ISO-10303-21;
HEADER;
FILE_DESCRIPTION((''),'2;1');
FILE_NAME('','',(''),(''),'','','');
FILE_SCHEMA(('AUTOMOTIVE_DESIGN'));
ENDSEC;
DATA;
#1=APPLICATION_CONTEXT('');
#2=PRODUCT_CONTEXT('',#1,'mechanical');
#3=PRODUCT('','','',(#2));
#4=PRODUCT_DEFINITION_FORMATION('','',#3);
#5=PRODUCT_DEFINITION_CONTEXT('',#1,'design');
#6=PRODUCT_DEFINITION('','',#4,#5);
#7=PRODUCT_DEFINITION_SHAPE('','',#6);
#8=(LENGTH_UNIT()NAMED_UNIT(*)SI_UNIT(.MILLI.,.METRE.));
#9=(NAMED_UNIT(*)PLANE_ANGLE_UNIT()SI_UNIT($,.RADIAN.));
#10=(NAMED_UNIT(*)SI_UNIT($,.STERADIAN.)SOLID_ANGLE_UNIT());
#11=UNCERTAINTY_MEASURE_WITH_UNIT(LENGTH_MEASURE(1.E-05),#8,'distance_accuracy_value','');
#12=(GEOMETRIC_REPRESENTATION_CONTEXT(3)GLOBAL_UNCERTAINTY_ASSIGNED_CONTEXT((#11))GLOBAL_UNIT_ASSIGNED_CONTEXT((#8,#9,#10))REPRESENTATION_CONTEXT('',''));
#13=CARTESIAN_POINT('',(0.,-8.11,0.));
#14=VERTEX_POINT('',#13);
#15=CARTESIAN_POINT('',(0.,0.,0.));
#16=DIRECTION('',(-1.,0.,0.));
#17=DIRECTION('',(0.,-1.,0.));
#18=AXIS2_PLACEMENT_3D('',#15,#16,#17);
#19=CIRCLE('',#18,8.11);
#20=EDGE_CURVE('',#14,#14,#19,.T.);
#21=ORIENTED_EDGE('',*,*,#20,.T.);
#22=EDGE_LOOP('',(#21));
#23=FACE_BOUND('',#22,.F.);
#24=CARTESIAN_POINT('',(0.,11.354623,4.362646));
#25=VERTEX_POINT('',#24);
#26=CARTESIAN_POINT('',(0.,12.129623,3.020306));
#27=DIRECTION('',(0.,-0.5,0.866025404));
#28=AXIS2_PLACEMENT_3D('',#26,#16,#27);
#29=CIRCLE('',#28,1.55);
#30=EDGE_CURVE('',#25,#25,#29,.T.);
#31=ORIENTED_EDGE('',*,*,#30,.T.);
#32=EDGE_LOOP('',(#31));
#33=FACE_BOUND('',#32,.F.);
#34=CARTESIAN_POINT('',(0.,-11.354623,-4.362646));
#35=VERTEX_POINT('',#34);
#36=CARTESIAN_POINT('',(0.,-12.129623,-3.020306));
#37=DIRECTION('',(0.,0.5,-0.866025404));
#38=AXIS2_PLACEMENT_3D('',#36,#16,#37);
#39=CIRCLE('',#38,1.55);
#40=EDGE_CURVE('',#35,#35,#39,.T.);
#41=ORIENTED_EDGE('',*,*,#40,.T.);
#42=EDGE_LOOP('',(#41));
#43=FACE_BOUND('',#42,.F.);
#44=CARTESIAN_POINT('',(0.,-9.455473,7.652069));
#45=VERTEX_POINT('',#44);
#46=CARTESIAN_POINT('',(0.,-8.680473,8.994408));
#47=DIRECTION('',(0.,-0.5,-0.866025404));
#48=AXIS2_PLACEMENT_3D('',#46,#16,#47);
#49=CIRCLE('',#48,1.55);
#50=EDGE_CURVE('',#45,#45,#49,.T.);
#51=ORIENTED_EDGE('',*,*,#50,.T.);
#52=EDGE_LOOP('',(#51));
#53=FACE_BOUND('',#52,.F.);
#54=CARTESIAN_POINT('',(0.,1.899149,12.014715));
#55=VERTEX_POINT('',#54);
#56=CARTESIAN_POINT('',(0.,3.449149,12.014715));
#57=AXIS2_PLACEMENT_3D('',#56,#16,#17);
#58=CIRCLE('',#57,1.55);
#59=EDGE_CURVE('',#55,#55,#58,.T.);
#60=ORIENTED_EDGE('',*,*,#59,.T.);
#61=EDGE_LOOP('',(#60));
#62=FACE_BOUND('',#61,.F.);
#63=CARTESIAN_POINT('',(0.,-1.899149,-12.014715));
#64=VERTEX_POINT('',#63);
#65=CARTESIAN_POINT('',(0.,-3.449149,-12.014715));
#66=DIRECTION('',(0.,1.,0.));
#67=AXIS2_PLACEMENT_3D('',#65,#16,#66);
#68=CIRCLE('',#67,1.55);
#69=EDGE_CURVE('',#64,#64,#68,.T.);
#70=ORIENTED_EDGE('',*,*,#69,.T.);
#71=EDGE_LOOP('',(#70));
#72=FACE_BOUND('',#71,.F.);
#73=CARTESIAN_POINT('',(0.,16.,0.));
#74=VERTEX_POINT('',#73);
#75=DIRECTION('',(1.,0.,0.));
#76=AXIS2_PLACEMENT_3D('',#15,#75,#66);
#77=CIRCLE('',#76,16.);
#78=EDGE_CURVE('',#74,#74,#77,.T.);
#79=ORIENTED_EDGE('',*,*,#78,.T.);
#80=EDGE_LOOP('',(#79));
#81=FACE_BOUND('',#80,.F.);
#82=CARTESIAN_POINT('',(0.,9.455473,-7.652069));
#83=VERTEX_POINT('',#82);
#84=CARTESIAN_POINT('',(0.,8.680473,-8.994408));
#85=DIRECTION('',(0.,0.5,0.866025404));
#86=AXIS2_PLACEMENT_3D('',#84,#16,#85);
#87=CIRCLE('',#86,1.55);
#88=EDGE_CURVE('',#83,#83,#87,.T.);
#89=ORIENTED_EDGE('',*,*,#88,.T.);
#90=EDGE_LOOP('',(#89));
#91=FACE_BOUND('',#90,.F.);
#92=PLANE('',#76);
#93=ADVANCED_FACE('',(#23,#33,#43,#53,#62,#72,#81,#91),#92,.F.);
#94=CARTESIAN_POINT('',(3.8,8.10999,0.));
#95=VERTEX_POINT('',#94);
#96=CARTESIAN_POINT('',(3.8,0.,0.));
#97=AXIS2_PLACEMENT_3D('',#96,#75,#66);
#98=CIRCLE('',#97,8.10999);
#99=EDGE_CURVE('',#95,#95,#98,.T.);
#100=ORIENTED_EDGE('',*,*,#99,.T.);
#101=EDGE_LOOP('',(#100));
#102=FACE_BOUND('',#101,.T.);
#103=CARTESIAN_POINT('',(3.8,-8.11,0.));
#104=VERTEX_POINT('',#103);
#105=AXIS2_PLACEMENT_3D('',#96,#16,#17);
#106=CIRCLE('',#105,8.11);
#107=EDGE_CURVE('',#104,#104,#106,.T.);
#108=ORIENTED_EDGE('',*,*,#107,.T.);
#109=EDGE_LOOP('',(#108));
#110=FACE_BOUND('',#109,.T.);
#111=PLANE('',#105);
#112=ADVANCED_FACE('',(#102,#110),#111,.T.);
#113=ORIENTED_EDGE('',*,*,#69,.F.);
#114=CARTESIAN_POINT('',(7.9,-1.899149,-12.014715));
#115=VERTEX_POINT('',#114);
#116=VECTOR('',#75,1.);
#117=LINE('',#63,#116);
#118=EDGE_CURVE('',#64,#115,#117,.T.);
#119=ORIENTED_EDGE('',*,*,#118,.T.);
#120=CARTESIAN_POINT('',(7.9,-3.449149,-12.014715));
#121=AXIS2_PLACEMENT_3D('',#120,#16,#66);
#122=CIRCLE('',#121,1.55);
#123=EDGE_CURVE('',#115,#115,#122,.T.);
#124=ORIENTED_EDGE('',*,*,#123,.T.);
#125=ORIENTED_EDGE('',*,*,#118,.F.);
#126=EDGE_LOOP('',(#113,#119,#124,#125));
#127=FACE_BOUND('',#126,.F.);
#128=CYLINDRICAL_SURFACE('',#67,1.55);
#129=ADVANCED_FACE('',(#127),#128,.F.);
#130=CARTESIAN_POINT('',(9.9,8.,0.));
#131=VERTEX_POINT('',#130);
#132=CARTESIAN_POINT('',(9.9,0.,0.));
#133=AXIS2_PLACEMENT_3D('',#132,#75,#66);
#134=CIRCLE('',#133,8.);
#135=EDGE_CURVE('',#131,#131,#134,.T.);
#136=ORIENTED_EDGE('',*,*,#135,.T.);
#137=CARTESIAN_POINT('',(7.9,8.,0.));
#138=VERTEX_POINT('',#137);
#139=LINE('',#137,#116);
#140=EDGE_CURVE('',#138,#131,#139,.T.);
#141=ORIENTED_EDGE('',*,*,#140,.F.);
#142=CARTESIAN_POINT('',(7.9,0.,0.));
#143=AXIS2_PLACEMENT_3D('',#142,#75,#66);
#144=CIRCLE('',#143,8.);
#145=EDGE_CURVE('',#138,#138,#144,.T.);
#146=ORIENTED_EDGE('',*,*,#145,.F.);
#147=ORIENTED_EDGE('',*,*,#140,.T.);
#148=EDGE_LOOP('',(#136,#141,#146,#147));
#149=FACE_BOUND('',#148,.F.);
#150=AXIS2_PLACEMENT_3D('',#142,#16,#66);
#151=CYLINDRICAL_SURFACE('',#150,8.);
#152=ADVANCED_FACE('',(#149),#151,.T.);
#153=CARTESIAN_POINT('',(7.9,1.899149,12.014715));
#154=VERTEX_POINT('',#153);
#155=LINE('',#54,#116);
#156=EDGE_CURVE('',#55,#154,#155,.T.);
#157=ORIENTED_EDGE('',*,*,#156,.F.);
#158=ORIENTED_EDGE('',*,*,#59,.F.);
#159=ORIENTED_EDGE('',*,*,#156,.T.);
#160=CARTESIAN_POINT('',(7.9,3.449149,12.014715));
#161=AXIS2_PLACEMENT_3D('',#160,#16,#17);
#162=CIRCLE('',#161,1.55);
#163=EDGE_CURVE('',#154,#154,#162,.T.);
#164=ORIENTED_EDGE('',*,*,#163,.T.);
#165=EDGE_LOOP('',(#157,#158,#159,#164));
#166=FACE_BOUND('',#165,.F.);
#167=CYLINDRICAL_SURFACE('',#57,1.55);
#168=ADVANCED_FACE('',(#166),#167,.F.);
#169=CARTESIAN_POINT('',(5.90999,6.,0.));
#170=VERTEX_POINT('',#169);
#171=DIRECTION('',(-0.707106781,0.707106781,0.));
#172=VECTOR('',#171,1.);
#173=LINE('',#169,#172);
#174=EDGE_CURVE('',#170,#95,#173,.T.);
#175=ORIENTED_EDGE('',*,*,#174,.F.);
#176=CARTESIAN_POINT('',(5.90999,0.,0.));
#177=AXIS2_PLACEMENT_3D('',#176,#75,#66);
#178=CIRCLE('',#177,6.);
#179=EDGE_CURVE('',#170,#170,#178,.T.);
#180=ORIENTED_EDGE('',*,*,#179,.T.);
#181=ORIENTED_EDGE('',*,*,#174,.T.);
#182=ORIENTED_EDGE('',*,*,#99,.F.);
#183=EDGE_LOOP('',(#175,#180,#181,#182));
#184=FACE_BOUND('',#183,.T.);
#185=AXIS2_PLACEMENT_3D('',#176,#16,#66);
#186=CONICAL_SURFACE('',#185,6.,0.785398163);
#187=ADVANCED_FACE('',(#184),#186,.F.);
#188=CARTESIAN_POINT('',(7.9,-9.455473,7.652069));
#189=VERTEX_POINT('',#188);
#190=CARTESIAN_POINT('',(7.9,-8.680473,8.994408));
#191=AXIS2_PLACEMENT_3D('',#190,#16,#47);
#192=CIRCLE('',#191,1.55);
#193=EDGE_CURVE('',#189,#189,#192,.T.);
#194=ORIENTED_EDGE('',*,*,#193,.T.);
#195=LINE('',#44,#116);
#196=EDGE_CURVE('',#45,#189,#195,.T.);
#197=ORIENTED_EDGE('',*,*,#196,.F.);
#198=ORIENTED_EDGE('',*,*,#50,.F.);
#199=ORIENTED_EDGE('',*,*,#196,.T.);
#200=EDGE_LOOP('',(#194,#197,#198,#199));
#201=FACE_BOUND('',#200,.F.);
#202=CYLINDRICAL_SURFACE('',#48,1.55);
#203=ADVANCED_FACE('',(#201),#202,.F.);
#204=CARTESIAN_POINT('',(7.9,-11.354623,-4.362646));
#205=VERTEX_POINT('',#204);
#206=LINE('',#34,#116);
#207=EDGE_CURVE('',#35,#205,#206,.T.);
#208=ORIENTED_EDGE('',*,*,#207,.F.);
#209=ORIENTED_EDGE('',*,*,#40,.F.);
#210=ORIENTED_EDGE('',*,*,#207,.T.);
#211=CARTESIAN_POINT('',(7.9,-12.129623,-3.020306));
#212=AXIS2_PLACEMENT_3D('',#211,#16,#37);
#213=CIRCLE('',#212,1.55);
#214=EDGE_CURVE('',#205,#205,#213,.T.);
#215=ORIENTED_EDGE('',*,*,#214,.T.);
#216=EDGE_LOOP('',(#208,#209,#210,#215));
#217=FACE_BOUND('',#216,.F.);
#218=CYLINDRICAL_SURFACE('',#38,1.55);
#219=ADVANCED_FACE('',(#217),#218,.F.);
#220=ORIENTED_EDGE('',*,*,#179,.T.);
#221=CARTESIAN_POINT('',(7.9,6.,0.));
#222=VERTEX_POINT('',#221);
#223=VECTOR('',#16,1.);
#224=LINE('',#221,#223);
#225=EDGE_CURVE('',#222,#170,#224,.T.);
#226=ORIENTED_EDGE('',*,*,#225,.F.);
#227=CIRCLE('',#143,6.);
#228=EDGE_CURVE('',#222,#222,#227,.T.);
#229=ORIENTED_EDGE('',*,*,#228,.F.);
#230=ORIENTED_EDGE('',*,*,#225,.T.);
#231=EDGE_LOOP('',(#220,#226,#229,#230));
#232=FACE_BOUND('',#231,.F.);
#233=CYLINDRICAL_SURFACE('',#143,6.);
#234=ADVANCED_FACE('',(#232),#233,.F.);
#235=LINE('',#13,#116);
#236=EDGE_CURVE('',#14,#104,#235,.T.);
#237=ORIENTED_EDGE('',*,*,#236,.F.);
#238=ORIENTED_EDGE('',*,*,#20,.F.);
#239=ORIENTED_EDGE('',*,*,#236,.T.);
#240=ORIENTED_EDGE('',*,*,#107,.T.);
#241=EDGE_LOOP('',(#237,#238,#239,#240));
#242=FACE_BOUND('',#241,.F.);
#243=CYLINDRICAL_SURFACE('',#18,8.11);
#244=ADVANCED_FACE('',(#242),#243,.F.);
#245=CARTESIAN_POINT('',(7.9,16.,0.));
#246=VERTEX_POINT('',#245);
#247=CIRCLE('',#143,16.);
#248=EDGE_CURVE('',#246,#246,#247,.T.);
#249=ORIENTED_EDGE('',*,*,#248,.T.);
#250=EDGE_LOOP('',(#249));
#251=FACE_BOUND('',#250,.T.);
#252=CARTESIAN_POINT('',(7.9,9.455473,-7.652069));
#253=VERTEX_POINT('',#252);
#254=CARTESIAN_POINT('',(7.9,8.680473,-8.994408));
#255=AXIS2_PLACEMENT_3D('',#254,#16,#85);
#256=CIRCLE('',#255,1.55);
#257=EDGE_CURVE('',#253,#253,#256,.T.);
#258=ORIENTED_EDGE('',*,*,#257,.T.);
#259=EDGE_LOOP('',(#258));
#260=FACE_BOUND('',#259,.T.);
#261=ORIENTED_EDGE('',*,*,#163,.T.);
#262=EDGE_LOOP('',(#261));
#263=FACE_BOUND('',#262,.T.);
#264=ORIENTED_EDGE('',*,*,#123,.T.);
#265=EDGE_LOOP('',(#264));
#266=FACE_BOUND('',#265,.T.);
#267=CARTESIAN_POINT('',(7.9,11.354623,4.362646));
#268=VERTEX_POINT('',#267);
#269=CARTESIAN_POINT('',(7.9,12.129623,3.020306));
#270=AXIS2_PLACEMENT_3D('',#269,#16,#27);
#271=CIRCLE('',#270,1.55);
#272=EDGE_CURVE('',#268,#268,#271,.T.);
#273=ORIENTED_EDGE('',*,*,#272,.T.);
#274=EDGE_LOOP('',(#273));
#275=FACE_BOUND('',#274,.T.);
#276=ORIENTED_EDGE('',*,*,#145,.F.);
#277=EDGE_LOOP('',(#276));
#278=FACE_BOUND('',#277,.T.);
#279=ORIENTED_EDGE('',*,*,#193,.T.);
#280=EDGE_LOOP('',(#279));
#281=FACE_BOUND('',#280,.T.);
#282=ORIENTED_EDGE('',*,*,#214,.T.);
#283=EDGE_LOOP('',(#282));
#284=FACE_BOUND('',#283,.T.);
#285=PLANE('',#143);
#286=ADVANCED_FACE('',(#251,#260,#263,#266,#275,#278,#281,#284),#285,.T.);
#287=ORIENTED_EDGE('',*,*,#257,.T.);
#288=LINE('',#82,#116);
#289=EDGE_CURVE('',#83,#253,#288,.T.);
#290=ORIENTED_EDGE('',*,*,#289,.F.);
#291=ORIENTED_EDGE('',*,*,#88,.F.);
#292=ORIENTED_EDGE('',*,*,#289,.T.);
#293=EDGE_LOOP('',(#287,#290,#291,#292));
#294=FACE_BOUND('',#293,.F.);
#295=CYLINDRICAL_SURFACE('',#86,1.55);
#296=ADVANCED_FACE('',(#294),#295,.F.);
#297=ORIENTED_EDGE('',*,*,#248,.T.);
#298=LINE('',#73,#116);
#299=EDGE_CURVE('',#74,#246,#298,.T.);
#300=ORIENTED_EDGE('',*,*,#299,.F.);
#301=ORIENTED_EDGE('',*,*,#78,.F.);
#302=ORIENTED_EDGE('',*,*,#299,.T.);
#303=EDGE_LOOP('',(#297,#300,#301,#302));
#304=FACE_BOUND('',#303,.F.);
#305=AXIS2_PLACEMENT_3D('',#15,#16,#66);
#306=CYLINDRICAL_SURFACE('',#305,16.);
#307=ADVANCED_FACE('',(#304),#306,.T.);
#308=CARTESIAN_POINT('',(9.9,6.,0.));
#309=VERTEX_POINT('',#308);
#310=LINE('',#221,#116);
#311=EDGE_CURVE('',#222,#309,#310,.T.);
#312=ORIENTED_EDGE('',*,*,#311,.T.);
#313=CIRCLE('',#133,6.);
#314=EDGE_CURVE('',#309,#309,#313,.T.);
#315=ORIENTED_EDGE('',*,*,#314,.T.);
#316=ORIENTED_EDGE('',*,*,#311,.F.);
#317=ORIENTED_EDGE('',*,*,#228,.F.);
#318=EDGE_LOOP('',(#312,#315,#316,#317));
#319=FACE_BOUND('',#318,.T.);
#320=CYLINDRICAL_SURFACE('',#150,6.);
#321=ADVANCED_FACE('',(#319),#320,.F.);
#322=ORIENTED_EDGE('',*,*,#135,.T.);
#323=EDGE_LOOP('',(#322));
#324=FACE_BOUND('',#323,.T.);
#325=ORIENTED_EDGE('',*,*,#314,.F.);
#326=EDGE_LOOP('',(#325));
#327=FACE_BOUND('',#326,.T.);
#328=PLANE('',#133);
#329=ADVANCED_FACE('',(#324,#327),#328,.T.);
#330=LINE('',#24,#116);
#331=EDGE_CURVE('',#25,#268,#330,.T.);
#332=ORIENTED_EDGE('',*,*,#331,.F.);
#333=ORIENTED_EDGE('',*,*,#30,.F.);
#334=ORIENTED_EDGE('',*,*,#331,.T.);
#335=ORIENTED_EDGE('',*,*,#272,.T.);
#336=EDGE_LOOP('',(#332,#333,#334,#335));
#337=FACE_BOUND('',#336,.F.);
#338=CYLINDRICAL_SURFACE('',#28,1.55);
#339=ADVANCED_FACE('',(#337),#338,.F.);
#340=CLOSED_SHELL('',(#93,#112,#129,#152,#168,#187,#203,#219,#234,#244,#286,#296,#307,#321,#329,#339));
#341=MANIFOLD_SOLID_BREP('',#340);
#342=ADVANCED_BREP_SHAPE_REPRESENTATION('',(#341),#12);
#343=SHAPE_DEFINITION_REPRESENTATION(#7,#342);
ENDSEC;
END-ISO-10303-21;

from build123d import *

# Parameters (mm, degrees)
F0_R            = 16
F1_DEPTH        = 7.9
F2_R            = 8.11
F3_DEPTH        = 3.8
F4_R            = 6
F5_DEPTH        = 7.901
F6_R            = 1.55
F7_DEPTH        = 7.901
F7_COPIES_COUNT = 6
F8_R            = 8
F8_R_2          = 6
F9_DEPTH        = 2
F10_SIZE2       = 2.10999
F10_SIZE        = 2.10999


# Not quite as in the source:
# - a fillet or chamfer is up to 0.001 mm smaller than in the source, because OpenCascade refuses the exact size
# - a pattern or mirror of a feature is missing from the dataset's text; its kind, count and spacing are read off the source's solid


with BuildPart() as f1:
    # F0 (on Right) → F1 (new body)
    with BuildSketch(Plane.YZ):
        Circle(F0_R)
    extrude(amount=F1_DEPTH)

    # F2 (on face) → F3 (cut)
    with BuildSketch(Plane(origin=(0, 0, 0), x_dir=(0, -1, 0), z_dir=(-1, 0, 0))):
        Circle(F2_R)
    extrude(amount=-F3_DEPTH, mode=Mode.SUBTRACT)

    # F4 (on face) → F5 (cut, through all)
    with BuildSketch(Plane.YZ.offset(7.9)):
        Circle(F4_R)
    extrude(amount=-F5_DEPTH, mode=Mode.SUBTRACT)

    # F6 (on face) → F7 (cut, through all)
    with BuildSketch(Plane(origin=(0, 0, 0), x_dir=(0, -1, 0), z_dir=(-1, 0, 0))):
        with Locations((-3.4491492906, 12.0147146937)):
            Circle(F6_R)
    f7 = extrude(amount=-F7_DEPTH, mode=Mode.SUBTRACT)

    # F7_copies: F7 ×6 about axis
    f7_copies_axis = Axis((0, 0, 0), (1, 0, 0))
    for i in range(1, F7_COPIES_COUNT):
        add(f7.rotate(f7_copies_axis, i * 360 / F7_COPIES_COUNT), mode=Mode.SUBTRACT)

    # F8 (on face) → F9 (join)
    with BuildSketch(Plane.YZ.offset(7.9)):
        Circle(F8_R)
        Circle(F8_R_2, mode=Mode.SUBTRACT)
    extrude(amount=F9_DEPTH)

    # F10 (size 2.11 and 2.11 in the source; OpenCascade refuses exactly that, so slightly less here)
    f10_edges = [f1.edges().sort_by_distance(p)[0] for p in [
        (3.8, -6, 0),
    ]]
    chamfer(f10_edges, length=F10_SIZE, length2=F10_SIZE2)


solid = f1.part
